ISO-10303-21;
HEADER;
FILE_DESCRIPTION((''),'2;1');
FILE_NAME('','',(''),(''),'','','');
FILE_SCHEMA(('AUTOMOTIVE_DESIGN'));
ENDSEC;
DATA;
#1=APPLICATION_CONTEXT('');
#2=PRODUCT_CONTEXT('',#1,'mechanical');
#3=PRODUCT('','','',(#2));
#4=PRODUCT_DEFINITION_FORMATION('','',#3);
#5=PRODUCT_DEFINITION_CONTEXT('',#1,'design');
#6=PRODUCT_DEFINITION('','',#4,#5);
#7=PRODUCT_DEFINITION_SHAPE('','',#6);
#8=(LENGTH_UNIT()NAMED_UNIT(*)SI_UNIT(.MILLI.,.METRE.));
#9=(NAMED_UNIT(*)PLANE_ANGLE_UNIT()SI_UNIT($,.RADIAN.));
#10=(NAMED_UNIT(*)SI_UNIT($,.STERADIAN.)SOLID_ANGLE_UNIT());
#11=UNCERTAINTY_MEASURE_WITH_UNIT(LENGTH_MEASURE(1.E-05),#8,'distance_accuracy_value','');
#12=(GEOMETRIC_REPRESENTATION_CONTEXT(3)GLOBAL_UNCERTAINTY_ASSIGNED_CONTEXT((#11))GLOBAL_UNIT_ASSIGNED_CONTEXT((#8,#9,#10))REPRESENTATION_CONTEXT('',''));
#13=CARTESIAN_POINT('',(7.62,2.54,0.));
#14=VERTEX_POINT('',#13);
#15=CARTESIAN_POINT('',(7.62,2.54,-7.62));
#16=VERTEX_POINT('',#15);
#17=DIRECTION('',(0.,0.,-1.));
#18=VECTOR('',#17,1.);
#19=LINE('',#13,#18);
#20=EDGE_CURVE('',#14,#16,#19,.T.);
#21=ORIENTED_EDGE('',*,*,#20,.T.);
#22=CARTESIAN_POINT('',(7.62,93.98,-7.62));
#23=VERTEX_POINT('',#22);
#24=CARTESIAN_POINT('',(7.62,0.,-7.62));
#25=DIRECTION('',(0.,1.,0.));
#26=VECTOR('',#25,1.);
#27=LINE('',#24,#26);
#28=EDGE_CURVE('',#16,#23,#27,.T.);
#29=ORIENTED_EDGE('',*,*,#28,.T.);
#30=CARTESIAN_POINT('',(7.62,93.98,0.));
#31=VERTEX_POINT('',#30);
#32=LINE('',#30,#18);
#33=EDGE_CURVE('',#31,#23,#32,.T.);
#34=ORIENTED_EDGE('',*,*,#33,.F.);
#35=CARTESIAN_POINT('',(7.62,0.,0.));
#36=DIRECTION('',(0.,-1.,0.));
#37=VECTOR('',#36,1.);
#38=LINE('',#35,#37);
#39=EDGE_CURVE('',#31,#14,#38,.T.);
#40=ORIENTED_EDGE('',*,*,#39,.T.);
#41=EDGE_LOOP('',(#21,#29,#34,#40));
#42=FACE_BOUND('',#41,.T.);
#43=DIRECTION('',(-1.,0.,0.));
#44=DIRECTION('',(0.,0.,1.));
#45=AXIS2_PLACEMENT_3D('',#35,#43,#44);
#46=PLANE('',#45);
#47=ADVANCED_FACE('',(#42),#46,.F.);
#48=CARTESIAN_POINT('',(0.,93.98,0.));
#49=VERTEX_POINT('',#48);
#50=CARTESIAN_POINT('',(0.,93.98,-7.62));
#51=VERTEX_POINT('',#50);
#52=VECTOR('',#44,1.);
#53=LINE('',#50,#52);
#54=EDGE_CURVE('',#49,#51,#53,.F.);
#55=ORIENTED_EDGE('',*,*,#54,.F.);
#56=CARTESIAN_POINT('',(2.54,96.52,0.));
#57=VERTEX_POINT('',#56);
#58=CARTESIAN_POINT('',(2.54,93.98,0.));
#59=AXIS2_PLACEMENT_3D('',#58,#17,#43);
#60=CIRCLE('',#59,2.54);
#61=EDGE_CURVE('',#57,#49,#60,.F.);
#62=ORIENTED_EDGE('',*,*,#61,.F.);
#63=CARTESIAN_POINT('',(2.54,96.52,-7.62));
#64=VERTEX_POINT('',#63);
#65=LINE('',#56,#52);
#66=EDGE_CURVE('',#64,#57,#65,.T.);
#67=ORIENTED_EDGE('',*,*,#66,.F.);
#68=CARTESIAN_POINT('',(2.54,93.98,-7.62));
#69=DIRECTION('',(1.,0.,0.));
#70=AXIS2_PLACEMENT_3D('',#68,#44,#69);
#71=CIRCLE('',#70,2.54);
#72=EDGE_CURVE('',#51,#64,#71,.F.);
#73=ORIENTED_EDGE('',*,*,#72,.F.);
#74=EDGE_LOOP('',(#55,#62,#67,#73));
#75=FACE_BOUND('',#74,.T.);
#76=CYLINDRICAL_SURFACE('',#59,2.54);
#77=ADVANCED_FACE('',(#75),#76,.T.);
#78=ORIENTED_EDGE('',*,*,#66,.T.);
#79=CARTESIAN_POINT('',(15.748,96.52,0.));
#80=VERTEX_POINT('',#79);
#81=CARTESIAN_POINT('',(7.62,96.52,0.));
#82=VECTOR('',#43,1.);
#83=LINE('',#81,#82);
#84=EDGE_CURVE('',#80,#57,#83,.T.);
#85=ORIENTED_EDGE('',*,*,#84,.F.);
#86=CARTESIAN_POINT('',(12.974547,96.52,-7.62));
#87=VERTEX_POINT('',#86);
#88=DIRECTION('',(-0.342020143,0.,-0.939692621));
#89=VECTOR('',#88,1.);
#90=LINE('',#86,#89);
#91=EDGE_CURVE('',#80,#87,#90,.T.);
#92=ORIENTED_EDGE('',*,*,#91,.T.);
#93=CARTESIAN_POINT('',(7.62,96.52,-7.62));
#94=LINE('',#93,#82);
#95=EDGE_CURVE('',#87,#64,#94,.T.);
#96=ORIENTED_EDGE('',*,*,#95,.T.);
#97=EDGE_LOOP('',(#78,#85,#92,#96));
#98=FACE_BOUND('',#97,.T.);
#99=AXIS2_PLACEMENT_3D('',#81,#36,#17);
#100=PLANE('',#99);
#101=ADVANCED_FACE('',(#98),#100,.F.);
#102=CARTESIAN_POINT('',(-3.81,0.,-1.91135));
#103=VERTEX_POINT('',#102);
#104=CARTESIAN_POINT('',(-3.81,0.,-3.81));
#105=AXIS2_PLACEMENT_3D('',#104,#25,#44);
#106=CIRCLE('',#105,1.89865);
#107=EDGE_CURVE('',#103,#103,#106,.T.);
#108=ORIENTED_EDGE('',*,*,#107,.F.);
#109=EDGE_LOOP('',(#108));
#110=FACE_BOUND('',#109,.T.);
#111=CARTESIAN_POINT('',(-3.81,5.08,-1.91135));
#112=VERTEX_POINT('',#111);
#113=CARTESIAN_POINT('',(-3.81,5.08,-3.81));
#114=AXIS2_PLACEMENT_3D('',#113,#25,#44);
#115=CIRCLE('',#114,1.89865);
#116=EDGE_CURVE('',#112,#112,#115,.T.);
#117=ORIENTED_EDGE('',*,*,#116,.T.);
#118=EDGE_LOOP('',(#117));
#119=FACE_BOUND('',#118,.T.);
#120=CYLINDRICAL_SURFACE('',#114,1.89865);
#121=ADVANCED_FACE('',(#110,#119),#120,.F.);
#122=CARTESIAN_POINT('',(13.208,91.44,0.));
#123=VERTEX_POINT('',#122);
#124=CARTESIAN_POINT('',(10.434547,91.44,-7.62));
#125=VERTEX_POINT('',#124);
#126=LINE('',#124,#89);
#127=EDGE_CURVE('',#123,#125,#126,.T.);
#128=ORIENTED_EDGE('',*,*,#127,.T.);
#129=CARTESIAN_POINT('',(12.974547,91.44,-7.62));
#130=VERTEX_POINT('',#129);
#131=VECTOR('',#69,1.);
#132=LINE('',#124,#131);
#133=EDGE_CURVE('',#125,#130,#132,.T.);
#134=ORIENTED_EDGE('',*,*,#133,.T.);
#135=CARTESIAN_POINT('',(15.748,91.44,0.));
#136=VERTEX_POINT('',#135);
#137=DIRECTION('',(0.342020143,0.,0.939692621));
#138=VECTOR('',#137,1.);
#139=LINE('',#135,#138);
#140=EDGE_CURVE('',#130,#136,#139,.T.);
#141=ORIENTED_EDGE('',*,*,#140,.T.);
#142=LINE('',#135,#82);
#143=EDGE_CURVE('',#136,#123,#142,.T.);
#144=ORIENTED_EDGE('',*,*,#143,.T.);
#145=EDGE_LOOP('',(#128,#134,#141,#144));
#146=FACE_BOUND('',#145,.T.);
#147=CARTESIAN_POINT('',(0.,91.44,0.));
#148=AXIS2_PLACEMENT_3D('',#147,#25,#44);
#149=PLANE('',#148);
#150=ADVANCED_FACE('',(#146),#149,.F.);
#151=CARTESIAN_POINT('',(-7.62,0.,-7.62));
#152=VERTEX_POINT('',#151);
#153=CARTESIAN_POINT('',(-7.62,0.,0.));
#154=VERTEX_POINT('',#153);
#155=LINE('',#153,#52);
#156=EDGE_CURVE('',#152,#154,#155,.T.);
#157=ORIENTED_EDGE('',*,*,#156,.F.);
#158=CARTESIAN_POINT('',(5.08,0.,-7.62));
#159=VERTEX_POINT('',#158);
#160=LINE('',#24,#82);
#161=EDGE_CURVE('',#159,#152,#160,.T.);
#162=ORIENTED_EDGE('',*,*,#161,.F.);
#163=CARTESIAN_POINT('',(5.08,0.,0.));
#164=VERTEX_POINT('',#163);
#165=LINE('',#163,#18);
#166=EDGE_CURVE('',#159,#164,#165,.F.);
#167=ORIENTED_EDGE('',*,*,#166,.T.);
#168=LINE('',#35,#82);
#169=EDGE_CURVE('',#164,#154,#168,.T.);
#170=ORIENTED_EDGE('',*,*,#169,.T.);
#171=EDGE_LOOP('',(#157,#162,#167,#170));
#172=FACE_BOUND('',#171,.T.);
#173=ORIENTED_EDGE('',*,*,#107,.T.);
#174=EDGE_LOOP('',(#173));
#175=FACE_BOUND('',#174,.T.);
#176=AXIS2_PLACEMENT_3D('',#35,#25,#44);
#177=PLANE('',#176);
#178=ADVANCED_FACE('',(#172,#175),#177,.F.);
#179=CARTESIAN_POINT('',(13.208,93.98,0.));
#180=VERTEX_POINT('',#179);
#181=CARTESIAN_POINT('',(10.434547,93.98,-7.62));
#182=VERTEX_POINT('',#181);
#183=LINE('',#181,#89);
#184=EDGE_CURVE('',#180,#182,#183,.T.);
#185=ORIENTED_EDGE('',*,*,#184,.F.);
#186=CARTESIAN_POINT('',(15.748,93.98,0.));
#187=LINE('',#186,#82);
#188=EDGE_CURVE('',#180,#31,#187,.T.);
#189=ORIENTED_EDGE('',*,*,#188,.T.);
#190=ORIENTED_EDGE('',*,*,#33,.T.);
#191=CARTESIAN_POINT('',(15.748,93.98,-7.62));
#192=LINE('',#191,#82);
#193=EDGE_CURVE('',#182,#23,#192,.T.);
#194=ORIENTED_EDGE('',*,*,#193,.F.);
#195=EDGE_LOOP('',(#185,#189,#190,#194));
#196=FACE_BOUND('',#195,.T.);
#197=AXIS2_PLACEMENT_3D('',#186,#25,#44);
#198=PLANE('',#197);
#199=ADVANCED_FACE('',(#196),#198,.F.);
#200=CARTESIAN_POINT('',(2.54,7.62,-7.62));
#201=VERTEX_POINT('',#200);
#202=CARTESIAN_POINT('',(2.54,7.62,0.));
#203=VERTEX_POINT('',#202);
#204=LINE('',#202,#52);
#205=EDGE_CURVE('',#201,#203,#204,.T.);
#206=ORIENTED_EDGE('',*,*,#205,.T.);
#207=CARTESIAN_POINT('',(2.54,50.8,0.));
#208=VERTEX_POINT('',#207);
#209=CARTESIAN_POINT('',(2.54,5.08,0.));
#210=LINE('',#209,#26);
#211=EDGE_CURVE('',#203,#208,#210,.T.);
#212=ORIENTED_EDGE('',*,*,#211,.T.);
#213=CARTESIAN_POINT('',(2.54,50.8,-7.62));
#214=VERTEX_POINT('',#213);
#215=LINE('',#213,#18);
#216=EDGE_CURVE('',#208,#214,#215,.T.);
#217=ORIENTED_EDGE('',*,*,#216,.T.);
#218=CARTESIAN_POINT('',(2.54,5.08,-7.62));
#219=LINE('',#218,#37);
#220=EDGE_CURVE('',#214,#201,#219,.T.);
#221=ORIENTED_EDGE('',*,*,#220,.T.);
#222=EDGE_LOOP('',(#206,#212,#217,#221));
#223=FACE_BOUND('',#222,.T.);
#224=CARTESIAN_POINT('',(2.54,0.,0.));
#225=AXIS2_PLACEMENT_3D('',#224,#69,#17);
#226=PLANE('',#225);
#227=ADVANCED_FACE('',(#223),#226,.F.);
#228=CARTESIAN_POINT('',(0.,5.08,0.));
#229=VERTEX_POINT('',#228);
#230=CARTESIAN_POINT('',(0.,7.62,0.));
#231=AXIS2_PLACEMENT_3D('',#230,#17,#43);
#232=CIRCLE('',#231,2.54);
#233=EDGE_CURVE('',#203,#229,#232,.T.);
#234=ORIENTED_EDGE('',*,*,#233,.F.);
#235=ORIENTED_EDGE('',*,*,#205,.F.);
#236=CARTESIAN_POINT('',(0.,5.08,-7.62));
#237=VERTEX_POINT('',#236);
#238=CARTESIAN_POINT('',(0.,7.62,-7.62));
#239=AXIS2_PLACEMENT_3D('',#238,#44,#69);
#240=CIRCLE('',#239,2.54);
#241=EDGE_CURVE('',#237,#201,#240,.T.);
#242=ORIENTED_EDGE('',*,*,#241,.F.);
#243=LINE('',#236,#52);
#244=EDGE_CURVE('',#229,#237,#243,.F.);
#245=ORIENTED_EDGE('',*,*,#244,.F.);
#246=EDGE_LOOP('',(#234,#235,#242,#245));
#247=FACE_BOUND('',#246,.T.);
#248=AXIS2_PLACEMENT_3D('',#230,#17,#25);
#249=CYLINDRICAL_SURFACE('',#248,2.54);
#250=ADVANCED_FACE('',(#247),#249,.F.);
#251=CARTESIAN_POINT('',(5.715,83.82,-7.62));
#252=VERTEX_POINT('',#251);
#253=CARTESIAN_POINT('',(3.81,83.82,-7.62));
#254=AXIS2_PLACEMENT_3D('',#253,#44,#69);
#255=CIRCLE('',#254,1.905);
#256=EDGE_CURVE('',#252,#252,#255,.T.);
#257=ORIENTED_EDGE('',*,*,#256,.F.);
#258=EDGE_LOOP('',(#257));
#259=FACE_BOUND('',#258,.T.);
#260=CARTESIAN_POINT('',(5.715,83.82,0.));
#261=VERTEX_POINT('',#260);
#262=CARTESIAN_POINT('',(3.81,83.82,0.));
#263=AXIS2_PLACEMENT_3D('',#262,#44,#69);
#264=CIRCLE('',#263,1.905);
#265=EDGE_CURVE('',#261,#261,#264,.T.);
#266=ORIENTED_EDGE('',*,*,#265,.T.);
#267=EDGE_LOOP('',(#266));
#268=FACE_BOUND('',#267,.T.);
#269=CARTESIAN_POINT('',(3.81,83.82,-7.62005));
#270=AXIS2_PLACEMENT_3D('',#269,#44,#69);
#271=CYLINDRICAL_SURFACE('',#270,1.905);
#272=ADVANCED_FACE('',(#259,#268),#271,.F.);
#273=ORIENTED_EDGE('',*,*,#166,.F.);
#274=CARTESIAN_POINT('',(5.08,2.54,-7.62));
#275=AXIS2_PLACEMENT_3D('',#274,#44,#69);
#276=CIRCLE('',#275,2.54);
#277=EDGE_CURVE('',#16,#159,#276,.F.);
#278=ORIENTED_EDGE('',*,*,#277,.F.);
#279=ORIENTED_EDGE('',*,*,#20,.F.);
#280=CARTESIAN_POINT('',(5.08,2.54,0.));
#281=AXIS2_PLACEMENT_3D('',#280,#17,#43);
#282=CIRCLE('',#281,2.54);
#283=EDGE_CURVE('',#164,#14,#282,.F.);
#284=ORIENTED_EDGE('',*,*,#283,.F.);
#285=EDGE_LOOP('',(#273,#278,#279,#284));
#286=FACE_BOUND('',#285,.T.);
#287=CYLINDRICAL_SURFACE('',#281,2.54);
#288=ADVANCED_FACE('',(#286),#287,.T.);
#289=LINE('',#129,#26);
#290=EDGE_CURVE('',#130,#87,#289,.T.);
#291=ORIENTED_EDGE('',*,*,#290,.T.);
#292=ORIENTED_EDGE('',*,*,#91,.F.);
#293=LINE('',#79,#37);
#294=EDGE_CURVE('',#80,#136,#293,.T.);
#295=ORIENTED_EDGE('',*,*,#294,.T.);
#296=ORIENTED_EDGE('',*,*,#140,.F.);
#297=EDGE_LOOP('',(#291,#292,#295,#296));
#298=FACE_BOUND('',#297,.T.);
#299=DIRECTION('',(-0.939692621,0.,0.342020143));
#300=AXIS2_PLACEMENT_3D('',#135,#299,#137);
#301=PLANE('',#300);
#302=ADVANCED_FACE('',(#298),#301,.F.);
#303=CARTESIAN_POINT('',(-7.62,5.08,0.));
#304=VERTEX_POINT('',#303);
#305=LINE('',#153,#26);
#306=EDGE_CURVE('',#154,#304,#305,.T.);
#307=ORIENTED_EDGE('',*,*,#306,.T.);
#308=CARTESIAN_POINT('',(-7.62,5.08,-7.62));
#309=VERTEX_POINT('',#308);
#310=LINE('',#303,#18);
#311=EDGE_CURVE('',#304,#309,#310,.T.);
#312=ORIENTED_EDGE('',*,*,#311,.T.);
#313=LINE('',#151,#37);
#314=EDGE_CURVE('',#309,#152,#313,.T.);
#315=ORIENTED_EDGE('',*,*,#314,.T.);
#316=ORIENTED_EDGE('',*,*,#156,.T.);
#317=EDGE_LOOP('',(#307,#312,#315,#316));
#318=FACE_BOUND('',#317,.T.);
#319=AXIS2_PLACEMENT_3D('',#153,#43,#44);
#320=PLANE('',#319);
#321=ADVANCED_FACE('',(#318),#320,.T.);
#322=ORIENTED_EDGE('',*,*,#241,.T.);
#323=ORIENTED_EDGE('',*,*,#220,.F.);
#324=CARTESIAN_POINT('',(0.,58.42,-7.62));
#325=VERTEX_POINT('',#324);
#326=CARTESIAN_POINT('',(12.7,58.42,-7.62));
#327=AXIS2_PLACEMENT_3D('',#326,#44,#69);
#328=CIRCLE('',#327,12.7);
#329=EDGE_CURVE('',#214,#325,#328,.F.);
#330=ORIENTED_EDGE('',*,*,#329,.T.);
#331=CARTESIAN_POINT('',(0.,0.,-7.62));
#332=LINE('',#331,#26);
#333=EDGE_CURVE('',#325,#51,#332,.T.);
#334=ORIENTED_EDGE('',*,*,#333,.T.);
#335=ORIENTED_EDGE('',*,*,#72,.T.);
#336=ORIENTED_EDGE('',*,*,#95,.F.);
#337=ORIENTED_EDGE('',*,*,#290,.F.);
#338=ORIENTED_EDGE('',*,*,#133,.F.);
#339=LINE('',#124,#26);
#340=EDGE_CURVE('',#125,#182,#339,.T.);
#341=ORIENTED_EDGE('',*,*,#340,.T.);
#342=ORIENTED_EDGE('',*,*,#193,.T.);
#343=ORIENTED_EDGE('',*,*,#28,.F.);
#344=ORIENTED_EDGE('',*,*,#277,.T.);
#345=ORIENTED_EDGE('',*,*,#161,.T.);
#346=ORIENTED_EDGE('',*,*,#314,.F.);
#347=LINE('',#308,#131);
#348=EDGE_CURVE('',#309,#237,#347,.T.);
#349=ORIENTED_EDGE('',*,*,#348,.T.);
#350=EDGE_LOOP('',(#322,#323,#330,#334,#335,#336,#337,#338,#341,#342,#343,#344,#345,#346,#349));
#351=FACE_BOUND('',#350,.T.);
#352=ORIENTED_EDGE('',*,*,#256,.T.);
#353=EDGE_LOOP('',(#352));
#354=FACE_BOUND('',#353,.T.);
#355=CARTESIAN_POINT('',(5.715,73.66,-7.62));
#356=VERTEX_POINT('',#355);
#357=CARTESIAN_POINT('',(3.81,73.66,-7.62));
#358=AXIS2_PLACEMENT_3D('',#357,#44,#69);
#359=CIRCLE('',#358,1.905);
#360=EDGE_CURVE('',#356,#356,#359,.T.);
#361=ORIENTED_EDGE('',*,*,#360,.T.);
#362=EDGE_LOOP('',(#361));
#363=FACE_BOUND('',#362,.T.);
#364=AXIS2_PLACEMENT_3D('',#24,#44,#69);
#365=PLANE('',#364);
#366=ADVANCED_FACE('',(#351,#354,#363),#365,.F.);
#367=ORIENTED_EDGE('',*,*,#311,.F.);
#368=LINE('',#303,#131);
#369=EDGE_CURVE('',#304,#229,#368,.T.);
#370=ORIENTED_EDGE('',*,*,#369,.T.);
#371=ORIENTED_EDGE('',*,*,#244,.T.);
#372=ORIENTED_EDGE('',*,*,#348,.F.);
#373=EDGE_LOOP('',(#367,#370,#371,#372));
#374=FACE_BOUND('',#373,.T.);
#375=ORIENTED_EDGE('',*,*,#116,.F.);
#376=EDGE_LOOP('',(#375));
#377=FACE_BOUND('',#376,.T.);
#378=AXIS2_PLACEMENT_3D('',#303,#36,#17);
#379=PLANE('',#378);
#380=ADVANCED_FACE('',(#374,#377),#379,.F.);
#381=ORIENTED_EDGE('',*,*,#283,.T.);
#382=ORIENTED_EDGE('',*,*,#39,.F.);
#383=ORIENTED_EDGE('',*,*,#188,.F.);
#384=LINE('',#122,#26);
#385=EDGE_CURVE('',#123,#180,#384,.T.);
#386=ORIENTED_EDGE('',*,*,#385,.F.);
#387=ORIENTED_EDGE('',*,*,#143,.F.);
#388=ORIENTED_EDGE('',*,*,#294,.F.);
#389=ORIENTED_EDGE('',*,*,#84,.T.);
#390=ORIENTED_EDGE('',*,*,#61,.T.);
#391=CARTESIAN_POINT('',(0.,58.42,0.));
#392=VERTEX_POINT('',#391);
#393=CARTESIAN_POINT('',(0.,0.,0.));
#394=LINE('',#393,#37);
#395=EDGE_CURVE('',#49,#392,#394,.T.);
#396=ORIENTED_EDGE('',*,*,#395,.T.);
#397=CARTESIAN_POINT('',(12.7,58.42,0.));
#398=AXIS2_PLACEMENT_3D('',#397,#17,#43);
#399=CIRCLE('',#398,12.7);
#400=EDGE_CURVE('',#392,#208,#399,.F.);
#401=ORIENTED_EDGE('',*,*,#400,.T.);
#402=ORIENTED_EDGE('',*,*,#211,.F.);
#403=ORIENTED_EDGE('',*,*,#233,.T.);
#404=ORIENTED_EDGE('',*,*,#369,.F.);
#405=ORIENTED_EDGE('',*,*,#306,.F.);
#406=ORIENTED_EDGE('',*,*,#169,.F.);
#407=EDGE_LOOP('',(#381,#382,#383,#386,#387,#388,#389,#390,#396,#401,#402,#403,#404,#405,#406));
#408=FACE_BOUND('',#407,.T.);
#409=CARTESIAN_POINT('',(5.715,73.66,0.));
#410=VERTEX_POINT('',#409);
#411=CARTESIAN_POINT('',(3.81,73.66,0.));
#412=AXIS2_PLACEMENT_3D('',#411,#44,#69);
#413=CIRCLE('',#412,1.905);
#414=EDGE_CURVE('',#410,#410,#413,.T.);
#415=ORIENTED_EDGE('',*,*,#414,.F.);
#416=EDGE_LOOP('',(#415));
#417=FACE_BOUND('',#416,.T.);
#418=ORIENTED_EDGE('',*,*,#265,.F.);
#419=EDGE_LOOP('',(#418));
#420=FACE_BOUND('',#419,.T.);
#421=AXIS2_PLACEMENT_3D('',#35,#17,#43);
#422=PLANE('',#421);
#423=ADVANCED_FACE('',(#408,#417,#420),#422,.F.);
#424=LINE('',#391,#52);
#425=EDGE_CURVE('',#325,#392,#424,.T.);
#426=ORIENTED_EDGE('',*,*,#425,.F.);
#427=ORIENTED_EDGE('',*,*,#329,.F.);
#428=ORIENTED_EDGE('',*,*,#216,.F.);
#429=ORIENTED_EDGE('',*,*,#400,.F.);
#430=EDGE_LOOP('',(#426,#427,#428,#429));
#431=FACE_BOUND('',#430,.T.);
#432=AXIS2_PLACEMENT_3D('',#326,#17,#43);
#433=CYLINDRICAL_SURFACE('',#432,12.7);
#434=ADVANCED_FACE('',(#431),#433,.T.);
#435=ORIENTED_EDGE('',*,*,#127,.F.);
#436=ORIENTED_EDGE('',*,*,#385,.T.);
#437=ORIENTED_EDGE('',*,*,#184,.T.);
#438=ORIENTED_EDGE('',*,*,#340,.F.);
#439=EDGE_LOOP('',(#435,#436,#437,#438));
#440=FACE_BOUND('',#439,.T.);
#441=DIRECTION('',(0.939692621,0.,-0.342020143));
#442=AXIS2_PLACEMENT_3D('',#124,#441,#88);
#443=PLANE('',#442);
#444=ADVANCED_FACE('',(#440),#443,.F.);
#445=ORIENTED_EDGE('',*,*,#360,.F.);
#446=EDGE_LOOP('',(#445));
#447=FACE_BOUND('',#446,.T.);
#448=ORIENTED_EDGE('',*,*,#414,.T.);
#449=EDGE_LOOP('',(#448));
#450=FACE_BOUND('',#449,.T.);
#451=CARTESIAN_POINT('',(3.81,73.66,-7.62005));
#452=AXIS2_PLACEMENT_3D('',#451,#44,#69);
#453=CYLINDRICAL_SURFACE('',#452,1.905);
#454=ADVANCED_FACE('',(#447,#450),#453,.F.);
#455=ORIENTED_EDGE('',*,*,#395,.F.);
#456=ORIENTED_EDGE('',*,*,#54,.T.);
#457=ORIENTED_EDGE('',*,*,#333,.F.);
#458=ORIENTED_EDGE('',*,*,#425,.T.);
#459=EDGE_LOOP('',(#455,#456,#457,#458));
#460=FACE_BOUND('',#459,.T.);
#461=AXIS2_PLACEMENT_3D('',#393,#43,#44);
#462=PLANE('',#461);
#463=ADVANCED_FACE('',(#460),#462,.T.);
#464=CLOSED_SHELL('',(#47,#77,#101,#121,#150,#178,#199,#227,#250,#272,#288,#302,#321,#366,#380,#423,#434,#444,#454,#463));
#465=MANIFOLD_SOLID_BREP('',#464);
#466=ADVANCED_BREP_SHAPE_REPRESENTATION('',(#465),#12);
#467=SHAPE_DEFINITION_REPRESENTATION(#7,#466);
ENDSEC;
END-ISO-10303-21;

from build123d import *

# Parameters (mm, degrees)
SKETCH1_W             = 7.62
SKETCH1_H             = 96.52
BOSS_EXTRUDE1_DEPTH   = 7.62
SKETCH2_W             = 7.62
SKETCH2_H             = 5.08
BOSS_EXTRUDE2_DEPTH   = 7.62
SKETCH4_W             = 7.62
SKETCH4_H             = 2.54
BOSS_EXTRUDE3_DEPTH   = 8.128
BOSS_EXTRUDE4_DEPTH   = 2.54
F_6_CLEARANCE_HOLE1_D = 3.7973
CUT_EXTRUDE1_DEPTH    = 2.54
SKETCH12_W            = 7.62
SKETCH12_H            = 45.72
CUT_EXTRUDE2_DEPTH    = 2.54
FILLET2_R             = 12.7
FILLET3_R             = 2.54
SKETCH14_R            = 1.905
CUT_EXTRUDE4_DEPTH    = 99.092682214


with BuildPart() as part:
    # Sketch1 → Boss-Extrude1 (new body)
    with BuildSketch(Plane(origin=(0, 0, 0), x_dir=(0, 0, -1), z_dir=(1, 0, 0))):
        with Locations((3.81, 48.26)):
            Rectangle(SKETCH1_W, SKETCH1_H)
    extrude(amount=BOSS_EXTRUDE1_DEPTH)

    # Sketch2 → Boss-Extrude2 (add)
    with BuildSketch(Plane.ZY):
        with Locations((-3.81, 2.54)):
            Rectangle(SKETCH2_W, SKETCH2_H)
    extrude(amount=BOSS_EXTRUDE2_DEPTH)

    # Sketch4 → Boss-Extrude3 (add)
    with BuildSketch(Plane(origin=(7.62, 0, 0), x_dir=(0, 0, -1), z_dir=(1, 0, 0))):
        with Locations((3.81, 95.25)):
            Rectangle(SKETCH4_W, SKETCH4_H)
    extrude(amount=BOSS_EXTRUDE3_DEPTH)

    # Sketch5 → Boss-Extrude4 (add)
    with BuildSketch(Plane.XZ.offset(-93.98)):
        Polygon((15.748, 0), (12.974546815, -7.62), (10.434546815, -7.62), (13.208, 0), align=None)
    extrude(amount=BOSS_EXTRUDE4_DEPTH)

    # #6 Clearance Hole1 (through all)
    with Locations(Plane(origin=(0, 5.08, 0), x_dir=(1, 0, 0), z_dir=(0, 1, 0))):
        with Locations((-3.81, 3.81)):
            Hole(F_6_CLEARANCE_HOLE1_D / 2)

    # Sketch8 → Cut-Extrude1 (cut)
    with BuildSketch(Plane.XZ.offset(-93.98)):
        Polygon((15.748, -7.62), (12.974546815, -7.62), (15.748, 0), align=None)
    extrude(amount=-CUT_EXTRUDE1_DEPTH, mode=Mode.SUBTRACT)

    # Sketch12 → Cut-Extrude2 (cut)
    with BuildSketch(Plane.ZY):
        with Locations((-3.81, 27.94)):
            Rectangle(SKETCH12_W, SKETCH12_H)
    extrude(amount=-CUT_EXTRUDE2_DEPTH, mode=Mode.SUBTRACT)

    # Fillet2
    # the kernel refuses this fillet: 12.7 mm, written as the material it takes off along each edge
    with BuildSketch(Plane(origin=(0, 50.8, 19.05), x_dir=(1, 0, 0), z_dir=(0, 0, -1))) as fillet2_piece_1:
        with BuildLine():
            CenterArc((12.7, -7.62), FILLET2_R, 143.130102354, 36.869897646)
            Line((0, -7.62), (-0.254, -7.62))
            Line((-0.254, -7.62), (-0.254, 0))
            Line((-0.254, 0), (0, 0.254))
            ThreePointArc((0, 0.254), (1.27, 0.254), (2.3368, 0.1524))
            Line((2.3368, 0.1524), (2.54, 0))
        make_face()
    extrude(amount=45.72, mode=Mode.SUBTRACT)

    # Fillet3
    fillet3_edges = [part.edges().sort_by_distance(p)[0] for p in [
        (2.54, 5.08, -3.81),
        (7.62, 0, -3.81),
        (0, 96.52, -3.81),
    ]]
    fillet(fillet3_edges, radius=FILLET3_R)

    # Sketch14 → Cut-Extrude4 (cut, through all)
    with BuildSketch(Plane.XY):
        with Locations((3.81, 83.82)):
            Circle(SKETCH14_R)
        with Locations((3.81, 73.66)):
            Circle(SKETCH14_R)
    extrude(amount=-CUT_EXTRUDE4_DEPTH, mode=Mode.SUBTRACT)


solid = part.part
